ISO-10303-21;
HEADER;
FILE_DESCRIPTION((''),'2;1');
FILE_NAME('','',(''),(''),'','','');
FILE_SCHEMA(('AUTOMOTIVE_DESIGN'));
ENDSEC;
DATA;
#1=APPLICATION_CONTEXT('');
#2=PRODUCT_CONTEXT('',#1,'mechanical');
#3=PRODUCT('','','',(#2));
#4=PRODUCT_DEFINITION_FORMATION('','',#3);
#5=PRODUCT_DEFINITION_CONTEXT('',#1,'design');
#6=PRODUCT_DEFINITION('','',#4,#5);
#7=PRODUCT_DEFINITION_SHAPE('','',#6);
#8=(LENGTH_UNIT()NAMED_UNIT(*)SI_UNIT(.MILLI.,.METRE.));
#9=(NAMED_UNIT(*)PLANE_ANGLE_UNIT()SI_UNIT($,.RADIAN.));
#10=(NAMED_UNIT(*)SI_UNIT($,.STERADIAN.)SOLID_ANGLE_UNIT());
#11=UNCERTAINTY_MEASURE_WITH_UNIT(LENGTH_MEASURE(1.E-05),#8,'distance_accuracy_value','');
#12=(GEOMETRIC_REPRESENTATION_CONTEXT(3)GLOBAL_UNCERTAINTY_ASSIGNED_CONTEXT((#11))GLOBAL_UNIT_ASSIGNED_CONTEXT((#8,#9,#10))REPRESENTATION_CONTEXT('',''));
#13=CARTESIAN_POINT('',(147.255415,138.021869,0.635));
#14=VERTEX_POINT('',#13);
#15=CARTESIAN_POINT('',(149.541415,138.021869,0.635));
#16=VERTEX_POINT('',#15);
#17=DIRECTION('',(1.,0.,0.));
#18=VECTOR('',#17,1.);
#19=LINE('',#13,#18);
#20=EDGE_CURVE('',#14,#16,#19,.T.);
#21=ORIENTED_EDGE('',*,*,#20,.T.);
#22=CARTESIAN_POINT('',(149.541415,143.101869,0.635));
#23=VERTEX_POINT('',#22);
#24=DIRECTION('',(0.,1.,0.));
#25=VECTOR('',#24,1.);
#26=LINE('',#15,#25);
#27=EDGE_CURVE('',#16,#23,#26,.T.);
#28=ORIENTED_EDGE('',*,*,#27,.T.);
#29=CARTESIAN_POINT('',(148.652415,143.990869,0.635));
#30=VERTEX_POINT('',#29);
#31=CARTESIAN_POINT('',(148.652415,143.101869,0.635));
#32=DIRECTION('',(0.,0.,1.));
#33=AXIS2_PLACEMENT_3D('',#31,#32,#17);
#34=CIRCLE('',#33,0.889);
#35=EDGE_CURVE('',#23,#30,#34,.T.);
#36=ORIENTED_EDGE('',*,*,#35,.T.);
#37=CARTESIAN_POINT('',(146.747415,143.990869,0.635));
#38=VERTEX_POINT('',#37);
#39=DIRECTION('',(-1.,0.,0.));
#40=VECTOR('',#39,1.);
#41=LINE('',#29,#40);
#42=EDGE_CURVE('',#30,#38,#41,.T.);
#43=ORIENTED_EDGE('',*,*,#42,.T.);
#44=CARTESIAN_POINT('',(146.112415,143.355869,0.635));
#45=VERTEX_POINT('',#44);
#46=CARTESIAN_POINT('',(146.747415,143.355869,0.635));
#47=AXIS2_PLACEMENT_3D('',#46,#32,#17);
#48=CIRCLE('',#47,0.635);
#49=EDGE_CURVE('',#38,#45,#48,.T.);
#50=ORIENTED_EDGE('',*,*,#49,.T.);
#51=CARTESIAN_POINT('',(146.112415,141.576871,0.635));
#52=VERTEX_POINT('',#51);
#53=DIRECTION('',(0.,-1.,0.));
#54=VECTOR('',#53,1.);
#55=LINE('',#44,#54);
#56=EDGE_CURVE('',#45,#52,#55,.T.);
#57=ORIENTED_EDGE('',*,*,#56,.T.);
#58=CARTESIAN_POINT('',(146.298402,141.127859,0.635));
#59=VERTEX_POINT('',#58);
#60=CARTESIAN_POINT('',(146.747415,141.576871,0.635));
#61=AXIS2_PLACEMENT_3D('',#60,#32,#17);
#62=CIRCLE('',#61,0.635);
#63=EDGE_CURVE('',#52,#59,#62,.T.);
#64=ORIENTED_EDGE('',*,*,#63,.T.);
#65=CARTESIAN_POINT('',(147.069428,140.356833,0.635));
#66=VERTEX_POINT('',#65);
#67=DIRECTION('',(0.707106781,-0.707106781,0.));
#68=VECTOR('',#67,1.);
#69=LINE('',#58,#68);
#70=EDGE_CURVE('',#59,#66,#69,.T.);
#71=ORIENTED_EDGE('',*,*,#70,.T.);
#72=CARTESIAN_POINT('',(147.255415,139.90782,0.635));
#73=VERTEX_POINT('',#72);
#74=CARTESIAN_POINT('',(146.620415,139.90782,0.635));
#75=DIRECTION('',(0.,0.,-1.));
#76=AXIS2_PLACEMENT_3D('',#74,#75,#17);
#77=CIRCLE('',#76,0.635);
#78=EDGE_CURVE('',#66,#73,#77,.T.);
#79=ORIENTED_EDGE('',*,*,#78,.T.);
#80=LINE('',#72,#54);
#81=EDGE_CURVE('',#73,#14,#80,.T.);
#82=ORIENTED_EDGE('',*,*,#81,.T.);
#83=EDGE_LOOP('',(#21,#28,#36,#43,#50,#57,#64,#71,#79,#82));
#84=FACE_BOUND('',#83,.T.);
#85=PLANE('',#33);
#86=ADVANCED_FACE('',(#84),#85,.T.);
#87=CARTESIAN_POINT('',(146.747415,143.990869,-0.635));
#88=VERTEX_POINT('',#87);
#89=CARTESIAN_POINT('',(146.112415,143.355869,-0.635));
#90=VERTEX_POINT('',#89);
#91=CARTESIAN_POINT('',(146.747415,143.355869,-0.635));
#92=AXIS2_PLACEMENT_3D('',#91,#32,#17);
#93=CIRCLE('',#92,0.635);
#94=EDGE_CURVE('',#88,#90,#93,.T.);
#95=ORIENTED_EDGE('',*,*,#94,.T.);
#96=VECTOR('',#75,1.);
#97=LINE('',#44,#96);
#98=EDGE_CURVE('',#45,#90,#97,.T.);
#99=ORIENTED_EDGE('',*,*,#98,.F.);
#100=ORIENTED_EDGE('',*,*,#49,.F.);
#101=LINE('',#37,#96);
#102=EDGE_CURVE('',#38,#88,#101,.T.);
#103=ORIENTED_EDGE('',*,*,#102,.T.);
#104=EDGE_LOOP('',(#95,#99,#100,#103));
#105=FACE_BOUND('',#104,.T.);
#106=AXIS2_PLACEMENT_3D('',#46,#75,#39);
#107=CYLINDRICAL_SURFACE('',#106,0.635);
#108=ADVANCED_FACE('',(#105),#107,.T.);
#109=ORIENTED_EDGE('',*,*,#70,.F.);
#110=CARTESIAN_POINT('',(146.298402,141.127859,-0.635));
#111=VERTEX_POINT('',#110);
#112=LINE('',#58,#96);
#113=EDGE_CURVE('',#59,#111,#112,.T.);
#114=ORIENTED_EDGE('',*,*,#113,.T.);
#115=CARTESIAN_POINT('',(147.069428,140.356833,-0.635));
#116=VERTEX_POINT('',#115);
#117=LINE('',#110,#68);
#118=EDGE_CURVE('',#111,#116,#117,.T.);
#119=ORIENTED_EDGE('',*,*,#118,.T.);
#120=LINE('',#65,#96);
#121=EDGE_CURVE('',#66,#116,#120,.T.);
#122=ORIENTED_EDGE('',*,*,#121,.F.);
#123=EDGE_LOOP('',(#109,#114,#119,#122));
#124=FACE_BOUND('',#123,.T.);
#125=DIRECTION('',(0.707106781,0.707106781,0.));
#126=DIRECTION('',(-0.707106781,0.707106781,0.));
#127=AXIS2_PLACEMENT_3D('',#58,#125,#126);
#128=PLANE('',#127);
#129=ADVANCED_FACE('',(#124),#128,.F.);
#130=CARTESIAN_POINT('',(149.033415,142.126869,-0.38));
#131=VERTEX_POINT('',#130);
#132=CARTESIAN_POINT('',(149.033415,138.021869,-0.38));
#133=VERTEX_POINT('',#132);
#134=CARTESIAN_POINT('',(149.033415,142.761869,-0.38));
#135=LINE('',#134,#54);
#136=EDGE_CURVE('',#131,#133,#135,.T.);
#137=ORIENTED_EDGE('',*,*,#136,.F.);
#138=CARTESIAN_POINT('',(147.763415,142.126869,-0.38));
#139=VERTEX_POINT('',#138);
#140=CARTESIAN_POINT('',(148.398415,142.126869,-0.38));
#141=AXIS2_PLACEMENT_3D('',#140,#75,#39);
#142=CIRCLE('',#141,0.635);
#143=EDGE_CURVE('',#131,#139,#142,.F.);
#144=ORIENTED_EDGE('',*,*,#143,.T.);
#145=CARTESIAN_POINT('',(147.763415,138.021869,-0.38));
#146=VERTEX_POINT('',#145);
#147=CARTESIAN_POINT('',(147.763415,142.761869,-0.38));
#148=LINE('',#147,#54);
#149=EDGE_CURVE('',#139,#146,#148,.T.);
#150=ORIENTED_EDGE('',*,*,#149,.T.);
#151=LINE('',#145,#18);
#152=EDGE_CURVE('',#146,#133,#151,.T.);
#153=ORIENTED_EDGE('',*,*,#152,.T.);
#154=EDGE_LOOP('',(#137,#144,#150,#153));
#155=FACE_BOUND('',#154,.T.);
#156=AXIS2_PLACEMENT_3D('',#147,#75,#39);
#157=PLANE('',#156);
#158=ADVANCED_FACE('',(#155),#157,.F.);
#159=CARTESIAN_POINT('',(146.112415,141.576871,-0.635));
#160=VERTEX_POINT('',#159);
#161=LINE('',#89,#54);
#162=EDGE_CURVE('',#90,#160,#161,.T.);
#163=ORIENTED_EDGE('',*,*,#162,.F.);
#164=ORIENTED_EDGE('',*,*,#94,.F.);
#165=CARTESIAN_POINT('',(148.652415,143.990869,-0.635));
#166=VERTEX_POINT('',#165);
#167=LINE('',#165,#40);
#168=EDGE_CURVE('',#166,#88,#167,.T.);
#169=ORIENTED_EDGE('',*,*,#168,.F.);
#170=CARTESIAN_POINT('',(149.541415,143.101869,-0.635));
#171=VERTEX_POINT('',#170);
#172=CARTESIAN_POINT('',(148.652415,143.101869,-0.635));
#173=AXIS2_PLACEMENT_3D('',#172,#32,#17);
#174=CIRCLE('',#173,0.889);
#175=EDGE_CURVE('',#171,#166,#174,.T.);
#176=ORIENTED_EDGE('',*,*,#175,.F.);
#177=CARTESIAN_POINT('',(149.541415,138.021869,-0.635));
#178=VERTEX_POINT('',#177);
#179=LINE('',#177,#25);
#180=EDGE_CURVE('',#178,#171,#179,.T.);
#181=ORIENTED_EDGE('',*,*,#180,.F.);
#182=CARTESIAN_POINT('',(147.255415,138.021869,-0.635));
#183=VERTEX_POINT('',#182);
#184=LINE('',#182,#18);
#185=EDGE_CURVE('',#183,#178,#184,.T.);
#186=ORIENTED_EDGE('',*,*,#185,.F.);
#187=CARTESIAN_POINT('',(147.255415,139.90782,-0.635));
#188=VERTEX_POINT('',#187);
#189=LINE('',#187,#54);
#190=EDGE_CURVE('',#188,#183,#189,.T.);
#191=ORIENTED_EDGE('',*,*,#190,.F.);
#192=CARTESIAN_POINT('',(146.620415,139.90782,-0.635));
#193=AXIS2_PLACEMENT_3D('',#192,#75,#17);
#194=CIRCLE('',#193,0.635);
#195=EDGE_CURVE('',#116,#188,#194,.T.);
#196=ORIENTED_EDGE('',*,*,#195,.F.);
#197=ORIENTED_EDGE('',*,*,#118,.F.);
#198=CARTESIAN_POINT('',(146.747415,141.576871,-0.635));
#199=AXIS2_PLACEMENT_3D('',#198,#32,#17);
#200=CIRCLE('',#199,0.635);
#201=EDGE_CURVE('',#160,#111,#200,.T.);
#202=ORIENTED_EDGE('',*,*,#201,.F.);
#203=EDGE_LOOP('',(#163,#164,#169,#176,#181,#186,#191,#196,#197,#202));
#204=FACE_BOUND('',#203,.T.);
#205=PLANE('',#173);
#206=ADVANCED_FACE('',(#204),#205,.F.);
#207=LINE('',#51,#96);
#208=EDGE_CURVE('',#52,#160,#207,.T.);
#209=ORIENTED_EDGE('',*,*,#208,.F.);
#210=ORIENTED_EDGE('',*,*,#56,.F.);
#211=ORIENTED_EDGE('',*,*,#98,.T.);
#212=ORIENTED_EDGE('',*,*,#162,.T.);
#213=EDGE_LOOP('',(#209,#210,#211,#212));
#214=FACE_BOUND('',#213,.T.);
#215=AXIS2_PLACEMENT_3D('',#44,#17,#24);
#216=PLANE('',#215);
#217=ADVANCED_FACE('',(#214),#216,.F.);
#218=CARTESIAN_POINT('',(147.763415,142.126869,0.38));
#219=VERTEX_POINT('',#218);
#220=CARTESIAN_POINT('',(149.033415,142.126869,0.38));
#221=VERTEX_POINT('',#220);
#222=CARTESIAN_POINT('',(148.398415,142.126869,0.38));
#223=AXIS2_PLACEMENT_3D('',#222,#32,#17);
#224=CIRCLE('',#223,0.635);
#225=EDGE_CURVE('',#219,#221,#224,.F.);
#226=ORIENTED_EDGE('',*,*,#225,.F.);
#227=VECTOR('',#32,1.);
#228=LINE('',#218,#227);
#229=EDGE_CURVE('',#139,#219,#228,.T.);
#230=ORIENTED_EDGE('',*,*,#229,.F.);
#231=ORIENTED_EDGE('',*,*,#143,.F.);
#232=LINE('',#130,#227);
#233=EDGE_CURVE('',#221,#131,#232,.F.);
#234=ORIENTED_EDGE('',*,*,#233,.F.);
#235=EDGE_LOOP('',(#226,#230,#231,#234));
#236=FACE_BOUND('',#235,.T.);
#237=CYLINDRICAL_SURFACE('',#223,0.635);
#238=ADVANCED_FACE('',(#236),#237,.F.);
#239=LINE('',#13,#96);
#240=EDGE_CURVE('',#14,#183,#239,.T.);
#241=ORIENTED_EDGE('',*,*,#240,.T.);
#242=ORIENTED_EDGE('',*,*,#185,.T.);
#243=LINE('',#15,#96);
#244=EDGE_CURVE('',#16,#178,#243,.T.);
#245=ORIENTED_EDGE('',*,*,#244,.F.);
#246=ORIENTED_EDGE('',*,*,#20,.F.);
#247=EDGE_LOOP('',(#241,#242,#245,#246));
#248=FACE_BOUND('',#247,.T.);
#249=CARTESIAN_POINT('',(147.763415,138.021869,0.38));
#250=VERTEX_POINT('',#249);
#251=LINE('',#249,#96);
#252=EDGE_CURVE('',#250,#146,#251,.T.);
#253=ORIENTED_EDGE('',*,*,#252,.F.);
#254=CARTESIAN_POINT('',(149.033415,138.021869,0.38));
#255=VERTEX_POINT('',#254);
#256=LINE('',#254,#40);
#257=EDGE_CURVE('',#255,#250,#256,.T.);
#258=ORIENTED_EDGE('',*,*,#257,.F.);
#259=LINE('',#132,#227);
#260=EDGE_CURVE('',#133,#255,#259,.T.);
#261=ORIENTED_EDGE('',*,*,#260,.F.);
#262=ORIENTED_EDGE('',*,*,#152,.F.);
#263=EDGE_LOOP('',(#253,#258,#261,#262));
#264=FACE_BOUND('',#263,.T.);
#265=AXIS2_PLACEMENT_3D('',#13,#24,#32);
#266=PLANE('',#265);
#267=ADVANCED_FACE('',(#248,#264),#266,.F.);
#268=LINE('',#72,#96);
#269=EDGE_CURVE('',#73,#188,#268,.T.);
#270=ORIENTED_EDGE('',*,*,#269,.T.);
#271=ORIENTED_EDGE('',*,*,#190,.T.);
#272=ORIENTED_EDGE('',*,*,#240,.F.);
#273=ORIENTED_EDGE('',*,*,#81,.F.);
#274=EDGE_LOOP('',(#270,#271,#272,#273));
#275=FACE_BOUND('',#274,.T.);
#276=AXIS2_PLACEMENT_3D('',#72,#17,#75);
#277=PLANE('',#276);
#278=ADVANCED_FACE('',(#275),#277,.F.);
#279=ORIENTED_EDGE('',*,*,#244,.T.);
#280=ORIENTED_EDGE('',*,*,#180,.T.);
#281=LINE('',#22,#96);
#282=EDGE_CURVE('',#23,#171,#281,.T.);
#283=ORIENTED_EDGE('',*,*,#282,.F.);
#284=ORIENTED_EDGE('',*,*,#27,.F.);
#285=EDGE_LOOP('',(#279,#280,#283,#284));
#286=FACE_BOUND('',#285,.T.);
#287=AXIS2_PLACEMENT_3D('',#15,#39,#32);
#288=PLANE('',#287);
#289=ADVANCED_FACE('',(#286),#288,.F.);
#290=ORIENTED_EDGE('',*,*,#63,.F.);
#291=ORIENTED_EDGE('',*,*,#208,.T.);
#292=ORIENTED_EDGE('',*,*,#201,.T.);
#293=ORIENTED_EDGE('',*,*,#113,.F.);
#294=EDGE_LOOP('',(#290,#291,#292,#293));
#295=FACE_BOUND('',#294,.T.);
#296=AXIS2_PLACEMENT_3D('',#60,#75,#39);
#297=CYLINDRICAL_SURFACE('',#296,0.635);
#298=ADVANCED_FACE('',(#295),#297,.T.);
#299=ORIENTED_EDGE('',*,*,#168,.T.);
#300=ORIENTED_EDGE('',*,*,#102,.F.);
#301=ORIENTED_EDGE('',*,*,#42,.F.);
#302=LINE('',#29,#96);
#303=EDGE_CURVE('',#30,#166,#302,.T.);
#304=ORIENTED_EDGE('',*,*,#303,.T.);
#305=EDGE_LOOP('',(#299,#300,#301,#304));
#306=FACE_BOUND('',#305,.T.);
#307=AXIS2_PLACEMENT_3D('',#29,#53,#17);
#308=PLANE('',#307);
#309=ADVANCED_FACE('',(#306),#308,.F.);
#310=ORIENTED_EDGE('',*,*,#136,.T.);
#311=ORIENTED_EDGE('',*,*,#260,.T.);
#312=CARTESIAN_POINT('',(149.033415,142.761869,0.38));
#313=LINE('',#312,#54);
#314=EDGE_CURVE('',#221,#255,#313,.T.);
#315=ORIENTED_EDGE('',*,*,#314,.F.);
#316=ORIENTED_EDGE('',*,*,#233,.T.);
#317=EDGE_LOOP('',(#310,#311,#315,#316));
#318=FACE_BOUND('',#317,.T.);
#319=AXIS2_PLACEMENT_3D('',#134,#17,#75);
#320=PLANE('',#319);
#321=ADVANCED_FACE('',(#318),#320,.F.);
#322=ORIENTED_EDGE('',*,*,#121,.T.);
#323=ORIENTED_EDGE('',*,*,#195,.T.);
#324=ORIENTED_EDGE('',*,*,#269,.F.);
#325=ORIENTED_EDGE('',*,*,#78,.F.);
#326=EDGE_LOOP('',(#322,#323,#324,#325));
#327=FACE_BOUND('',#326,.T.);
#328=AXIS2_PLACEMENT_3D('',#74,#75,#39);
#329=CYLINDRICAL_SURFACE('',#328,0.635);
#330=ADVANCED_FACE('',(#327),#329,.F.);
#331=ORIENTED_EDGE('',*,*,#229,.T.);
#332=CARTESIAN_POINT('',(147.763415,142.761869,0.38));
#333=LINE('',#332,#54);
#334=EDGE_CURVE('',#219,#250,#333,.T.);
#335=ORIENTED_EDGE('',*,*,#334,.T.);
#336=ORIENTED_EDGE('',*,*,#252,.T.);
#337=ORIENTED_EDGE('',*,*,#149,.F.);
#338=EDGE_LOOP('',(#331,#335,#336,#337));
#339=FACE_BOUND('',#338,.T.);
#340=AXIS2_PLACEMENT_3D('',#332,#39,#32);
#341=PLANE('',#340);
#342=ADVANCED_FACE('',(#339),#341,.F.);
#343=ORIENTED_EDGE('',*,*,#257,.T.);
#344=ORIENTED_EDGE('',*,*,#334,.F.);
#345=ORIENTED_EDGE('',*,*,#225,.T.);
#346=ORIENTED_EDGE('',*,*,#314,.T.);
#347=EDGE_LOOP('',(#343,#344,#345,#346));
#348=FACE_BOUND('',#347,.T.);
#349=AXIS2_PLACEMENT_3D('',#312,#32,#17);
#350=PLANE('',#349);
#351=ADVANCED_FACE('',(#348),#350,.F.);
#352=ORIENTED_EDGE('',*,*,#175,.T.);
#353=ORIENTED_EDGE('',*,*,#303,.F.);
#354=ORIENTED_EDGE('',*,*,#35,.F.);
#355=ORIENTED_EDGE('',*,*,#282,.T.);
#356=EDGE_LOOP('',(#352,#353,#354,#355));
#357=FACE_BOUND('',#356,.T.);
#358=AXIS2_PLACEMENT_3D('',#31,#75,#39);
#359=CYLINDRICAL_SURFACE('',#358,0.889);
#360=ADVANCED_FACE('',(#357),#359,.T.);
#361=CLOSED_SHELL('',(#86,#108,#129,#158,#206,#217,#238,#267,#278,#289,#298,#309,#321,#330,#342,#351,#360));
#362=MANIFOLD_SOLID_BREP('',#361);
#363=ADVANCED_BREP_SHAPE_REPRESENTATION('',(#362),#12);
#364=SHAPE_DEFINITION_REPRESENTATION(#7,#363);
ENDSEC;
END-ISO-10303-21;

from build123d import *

# Parameters (mm, degrees)
BOSS_EXTRUDE1_DEPTH = 0.635
SKETCH2_W           = 1.27
SKETCH2_H           = 0.76
CUT_EXTRUDE1_DEPTH  = 4.74
FILLET1_R           = 0.635


with BuildPart() as part:
    # Sketch1 → Boss-Extrude1 (new, symmetric)
    with BuildSketch(Plane.XY):
        with BuildLine():
            Line((146.298402351, 141.127858501), (147.069427963, 140.356832889))
            ThreePointArc((147.069427963, 140.356832889), (147.20707866, 140.150824062), (147.255415157, 139.907820083))
            Line((147.255415157, 139.907820083), (147.255415157, 138.021869168))
            Line((147.255415157, 138.021869168), (149.541415157, 138.021869168))
            Line((149.541415157, 138.021869168), (149.541415157, 143.101869168))
            ThreePointArc((149.541415157, 143.101869168), (149.281033086, 143.730487097), (148.652415157, 143.990869168))
            Line((148.652415157, 143.990869168), (146.747415157, 143.990869168))
            ThreePointArc((146.747415157, 143.990869168), (146.298402351, 143.804881974), (146.112415157, 143.355869168))
            Line((146.112415157, 143.355869168), (146.112415157, 141.576871307))
            ThreePointArc((146.112415157, 141.576871307), (146.160751654, 141.333867327), (146.298402351, 141.127858501))
        make_face()
    extrude(amount=BOSS_EXTRUDE1_DEPTH, both=True)

    # Sketch2 → Cut-Extrude1 (cut)
    with BuildSketch(Plane.XZ.offset(-138.021869168)):
        with Locations((148.398415157, 0)):
            Rectangle(SKETCH2_W, SKETCH2_H)
    extrude(amount=-CUT_EXTRUDE1_DEPTH, mode=Mode.SUBTRACT)

    # Fillet1
    fillet1_edges = [part.edges().sort_by_distance(p)[0] for p in [
        (147.763415157, 142.761869168, 0),
        (149.033415157, 142.761869168, 0),
    ]]
    fillet(fillet1_edges, radius=FILLET1_R - 0.0001)  # a hair under: the kernel refuses the full size


solid = part.part
